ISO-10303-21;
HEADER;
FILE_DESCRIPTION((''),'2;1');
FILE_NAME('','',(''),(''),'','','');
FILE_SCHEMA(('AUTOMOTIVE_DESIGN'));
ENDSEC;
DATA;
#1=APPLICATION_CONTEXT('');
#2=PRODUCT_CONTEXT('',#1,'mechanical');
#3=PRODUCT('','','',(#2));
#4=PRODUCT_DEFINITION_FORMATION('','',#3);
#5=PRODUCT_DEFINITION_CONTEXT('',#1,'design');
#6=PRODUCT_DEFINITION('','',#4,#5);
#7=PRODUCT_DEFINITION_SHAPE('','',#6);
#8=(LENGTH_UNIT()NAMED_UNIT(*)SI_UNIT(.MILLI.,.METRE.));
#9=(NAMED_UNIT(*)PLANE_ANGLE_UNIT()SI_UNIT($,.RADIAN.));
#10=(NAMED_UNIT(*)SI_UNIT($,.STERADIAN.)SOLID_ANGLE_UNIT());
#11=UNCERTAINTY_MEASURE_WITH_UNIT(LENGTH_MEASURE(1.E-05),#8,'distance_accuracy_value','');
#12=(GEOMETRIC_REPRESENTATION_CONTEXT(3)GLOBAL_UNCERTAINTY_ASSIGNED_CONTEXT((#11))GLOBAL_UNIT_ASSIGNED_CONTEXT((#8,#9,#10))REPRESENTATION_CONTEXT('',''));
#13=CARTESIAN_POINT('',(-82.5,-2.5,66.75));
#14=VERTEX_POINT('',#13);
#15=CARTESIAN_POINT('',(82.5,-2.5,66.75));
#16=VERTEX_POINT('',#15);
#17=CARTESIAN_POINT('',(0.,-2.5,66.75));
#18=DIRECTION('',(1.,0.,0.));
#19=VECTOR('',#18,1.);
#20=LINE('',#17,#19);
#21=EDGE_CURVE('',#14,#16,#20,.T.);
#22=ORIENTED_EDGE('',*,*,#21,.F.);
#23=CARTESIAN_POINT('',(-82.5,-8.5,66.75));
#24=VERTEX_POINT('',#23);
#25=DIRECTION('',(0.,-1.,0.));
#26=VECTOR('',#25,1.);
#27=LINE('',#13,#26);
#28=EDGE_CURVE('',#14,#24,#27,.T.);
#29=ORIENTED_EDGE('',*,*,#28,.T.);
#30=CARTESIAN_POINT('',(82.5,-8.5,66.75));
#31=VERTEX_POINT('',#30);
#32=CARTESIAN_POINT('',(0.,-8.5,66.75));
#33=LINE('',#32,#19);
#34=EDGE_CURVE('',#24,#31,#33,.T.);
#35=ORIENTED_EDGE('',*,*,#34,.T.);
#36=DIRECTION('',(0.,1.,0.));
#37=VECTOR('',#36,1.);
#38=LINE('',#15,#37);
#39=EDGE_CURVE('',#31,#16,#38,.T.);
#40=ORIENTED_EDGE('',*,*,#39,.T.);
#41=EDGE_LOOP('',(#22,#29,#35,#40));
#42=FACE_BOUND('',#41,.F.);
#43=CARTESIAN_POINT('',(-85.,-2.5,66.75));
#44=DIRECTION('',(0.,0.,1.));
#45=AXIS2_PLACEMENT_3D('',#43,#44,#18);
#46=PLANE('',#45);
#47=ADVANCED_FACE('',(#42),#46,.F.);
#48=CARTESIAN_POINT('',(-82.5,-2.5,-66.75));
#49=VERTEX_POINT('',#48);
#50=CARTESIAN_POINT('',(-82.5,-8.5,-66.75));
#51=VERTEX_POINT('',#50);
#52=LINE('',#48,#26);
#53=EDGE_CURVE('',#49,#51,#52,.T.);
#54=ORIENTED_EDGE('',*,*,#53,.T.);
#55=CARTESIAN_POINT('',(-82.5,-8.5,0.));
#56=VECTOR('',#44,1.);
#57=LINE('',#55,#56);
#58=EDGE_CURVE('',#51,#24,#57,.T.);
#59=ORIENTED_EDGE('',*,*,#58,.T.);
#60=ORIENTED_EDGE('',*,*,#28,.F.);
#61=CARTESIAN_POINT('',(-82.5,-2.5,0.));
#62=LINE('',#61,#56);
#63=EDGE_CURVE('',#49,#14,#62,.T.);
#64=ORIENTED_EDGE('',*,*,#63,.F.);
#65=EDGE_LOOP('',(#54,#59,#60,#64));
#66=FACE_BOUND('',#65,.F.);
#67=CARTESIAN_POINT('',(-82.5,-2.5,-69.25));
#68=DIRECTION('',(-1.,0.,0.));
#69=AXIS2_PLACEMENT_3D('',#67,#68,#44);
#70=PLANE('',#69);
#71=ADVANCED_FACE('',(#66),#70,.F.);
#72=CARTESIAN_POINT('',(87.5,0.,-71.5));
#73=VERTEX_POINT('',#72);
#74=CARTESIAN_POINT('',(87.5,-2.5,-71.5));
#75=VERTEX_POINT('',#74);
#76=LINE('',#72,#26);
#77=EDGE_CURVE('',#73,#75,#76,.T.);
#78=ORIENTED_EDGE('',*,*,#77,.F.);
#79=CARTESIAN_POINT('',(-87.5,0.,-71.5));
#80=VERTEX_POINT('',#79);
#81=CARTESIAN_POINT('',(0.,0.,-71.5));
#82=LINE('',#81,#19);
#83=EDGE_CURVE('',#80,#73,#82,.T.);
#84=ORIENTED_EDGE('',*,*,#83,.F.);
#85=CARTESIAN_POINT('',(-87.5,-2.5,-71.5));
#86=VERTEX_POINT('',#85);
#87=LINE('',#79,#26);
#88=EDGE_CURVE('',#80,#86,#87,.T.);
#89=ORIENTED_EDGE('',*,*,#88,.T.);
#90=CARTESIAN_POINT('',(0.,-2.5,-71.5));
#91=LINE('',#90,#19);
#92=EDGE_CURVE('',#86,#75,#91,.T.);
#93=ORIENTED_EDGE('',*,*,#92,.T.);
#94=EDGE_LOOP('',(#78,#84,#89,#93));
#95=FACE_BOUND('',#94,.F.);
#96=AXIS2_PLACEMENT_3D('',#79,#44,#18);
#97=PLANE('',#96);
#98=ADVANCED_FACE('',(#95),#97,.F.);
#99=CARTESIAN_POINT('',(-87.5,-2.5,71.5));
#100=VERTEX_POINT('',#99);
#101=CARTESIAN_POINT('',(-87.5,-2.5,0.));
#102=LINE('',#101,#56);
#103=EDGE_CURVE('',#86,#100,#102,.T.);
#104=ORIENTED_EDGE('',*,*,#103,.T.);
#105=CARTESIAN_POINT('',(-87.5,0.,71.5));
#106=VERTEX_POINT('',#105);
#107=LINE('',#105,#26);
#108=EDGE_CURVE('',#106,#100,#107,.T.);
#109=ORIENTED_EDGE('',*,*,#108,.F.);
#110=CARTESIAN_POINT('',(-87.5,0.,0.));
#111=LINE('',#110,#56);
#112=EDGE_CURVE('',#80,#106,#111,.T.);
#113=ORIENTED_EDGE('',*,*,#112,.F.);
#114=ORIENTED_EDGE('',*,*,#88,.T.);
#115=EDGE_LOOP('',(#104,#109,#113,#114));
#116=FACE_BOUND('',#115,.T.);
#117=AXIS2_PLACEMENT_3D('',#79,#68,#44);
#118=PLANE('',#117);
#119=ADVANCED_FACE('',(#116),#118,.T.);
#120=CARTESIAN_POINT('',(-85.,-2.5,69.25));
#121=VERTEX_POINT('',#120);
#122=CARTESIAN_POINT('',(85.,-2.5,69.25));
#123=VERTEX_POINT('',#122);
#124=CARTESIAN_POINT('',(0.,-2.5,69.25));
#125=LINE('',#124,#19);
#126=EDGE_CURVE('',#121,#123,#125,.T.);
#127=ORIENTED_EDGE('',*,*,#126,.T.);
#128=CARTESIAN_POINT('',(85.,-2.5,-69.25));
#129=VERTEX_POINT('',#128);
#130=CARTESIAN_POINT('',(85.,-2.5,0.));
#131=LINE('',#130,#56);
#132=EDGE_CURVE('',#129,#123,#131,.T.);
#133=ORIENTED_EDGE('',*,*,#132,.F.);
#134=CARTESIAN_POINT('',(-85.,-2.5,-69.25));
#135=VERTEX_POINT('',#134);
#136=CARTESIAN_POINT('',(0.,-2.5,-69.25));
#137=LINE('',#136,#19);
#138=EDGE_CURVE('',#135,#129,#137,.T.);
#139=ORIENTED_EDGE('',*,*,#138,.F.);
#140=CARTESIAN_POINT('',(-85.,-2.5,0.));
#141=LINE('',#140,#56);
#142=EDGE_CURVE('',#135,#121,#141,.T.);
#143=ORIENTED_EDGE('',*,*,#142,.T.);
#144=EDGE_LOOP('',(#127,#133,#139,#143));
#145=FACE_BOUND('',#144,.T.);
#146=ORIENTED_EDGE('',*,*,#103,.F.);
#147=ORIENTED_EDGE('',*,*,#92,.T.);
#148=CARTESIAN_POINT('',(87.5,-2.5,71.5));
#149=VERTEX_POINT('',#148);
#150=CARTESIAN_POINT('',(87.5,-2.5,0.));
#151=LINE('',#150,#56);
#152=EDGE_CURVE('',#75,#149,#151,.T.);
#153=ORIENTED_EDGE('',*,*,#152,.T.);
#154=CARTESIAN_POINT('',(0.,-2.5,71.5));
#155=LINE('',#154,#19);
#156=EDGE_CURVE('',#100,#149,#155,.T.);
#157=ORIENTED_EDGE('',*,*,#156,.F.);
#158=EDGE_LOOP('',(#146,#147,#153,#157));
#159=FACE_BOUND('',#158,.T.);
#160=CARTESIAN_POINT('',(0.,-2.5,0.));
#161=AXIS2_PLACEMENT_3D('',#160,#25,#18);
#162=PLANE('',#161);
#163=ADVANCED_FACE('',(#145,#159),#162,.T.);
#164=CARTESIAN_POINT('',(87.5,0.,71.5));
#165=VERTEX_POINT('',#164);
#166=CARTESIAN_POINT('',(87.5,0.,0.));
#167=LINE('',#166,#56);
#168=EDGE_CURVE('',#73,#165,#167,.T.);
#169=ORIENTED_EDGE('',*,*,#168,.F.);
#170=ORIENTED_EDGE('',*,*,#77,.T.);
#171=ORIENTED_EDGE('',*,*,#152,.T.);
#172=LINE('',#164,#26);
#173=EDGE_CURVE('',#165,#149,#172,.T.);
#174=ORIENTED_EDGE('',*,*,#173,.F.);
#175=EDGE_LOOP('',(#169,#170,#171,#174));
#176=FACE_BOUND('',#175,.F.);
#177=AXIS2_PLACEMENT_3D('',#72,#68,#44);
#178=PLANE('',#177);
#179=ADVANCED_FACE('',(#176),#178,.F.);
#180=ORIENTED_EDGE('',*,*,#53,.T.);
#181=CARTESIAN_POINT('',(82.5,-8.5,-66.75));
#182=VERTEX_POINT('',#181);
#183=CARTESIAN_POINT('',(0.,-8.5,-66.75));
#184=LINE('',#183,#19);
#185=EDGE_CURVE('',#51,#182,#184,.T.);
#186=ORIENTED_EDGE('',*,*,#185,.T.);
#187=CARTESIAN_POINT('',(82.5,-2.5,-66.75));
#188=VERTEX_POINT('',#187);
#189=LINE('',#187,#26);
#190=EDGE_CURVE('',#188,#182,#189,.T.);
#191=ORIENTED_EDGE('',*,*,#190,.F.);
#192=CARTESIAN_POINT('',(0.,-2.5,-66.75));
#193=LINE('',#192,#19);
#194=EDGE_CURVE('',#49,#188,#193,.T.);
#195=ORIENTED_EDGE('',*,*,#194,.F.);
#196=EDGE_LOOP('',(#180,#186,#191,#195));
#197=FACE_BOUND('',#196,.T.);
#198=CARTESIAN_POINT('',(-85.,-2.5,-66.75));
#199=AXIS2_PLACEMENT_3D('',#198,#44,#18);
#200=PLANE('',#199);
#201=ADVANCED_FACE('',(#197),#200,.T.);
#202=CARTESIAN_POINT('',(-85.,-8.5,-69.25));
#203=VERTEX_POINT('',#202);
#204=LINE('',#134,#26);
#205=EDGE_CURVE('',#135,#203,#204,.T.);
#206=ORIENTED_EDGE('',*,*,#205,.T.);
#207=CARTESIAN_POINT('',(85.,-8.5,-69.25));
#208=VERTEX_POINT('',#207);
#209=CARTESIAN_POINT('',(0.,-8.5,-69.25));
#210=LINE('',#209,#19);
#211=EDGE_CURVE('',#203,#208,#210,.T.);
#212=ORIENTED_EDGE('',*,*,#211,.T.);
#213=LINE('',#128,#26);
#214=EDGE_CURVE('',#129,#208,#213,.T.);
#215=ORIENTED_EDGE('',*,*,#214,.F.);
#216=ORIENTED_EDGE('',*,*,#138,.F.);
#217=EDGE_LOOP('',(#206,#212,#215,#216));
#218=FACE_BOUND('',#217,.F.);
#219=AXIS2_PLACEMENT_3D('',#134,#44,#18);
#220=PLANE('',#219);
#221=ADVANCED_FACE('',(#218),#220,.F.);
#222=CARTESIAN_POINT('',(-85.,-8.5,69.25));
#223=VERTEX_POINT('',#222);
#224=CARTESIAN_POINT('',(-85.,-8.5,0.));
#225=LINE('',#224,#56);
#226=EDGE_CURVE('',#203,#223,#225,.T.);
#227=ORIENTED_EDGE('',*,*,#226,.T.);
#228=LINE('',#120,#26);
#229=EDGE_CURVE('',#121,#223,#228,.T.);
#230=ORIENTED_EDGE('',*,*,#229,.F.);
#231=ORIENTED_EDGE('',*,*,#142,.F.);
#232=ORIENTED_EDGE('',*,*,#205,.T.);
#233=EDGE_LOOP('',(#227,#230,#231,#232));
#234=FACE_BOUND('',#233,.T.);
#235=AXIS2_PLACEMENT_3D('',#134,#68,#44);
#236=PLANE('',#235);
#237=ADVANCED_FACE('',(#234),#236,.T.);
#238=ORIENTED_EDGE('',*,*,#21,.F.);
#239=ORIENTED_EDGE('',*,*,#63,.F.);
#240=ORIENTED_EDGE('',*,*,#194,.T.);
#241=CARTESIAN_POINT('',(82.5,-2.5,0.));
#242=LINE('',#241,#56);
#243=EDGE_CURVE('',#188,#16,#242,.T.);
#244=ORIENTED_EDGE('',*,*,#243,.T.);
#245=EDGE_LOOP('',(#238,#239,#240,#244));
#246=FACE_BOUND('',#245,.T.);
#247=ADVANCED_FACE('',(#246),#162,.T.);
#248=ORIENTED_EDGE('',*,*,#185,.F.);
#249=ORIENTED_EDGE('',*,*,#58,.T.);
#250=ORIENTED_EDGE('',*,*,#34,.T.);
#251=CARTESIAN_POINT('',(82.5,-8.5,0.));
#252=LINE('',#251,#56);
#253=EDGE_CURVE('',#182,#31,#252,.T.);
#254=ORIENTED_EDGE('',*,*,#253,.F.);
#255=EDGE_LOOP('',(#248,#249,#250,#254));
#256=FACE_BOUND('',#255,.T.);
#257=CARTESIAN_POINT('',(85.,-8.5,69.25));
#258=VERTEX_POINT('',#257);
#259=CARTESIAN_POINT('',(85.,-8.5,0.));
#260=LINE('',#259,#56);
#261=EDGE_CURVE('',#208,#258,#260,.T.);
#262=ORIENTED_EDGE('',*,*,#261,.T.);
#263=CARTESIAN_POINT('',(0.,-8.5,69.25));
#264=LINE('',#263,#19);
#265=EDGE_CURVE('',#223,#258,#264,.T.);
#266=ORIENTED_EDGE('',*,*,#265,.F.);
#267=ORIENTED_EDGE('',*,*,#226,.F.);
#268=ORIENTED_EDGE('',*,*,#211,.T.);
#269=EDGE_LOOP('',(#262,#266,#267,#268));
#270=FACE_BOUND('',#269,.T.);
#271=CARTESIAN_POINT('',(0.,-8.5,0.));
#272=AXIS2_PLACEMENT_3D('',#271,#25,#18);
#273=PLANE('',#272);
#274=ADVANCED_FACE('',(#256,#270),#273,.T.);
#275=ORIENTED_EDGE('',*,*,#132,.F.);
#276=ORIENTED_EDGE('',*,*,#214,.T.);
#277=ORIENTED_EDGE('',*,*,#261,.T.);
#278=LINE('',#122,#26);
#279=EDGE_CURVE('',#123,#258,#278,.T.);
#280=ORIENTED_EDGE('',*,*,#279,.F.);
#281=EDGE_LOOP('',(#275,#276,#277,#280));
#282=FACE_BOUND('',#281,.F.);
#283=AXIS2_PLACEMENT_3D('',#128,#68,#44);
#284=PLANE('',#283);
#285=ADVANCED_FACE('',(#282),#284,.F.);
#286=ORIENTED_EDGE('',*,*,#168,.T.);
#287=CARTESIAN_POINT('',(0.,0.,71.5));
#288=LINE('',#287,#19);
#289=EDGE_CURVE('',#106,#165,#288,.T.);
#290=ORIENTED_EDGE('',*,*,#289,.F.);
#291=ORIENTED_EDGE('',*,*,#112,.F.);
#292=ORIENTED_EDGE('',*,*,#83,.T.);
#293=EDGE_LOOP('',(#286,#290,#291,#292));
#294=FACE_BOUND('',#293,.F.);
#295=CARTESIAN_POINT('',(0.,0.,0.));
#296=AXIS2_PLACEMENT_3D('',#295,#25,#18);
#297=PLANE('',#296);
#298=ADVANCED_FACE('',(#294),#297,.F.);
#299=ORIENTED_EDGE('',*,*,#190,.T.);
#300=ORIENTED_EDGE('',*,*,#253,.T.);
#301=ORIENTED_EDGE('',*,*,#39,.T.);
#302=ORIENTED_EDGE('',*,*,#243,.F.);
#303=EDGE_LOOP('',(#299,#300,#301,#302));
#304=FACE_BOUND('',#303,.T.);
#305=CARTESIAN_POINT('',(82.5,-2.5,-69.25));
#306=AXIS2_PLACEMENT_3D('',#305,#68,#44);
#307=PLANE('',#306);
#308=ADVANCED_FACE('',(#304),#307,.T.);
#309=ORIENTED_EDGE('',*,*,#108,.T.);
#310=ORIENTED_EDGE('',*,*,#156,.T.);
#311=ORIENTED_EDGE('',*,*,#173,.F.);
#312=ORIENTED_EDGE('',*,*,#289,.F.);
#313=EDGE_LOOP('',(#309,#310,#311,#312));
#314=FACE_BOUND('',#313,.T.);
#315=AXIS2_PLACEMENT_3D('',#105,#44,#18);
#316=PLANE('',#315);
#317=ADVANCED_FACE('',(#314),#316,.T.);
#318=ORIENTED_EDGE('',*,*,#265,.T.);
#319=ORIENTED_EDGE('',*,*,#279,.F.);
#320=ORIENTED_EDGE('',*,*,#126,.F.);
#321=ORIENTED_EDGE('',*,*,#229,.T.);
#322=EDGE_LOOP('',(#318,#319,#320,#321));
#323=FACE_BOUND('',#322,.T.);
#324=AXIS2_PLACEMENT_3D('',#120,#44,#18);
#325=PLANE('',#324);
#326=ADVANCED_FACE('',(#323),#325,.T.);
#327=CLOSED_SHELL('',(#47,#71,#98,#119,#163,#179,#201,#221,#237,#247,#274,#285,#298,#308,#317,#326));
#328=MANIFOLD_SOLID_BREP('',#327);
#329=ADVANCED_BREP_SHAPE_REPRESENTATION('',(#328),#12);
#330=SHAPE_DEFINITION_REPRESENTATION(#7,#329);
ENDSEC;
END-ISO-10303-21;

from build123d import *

# Parameters (mm, degrees)
F0_W        = 175
F0_H        = 143
F1_DEPTH    = 2.5
F2_W        = 170
F2_H        = 138.5
F3_DEPTH    = 6
F4_T        = 2.5
F4_T3_DEPTH = 175
F4_T5_DEPTH = 143.5


# Not quite as in the source:
# - a shell that OpenCascade refuses in one call is made with other operations: the cavity is built on its own and cut out


with BuildPart() as f1:
    # F0 (on Front) → F1 (new body)
    with BuildSketch(Plane.XZ):
        Rectangle(F0_W, F0_H)
    extrude(amount=F1_DEPTH)

    # F2 (on face) → F3 (join)
    with BuildSketch(Plane.XZ.offset(2.5)):
        Rectangle(F2_W, F2_H)
    extrude(amount=F3_DEPTH)

    # F4: shell of thickness 2.5, made by hand


with BuildPart() as f4_core1:
    # F4_t2: copy of F1
    add(f1.part)

    # the walls: a layer under each face that stays
    f4_faces = [f4_core1.faces().sort_by_distance(p)[0] for p in [
        (0, -1.25, -71.5),
        (-87.5, -1.25, 0),
        (87.5, -1.25, 0),
        (0, 0, 0),
        (60.15625, -2.5, -69.7345679012),
        (0, -1.25, 71.5),
        (0, -5.5, -69.25),
        (85, -5.5, 0),
        (0, -5.5, 69.25),
        (-85, -5.5, 0),
    ]]
    thicken(f4_faces, amount=-F4_T, mode=Mode.SUBTRACT)

    # F4_s4 → F4_t3 (cut)
    with BuildSketch(Plane.YZ.offset(-87.5)):
        Polygon((-2.525, -69.275), (0, -69.25), (0, -66.75), (-2.5, -66.75), align=None)
        Polygon((-2.525, 69.275), (0, 69.25), (0, 66.75), (-2.5, 66.75), align=None)
    extrude(amount=F4_T3_DEPTH, mode=Mode.SUBTRACT)

    # F4_s6 → F4_t5 (cut)
    with BuildSketch(Plane.XY.offset(-71.75)):
        Polygon((85.025, -2.525), (85, 0), (82.5, 0), (82.5, -2.5), align=None)
        Polygon((-85.025, -2.525), (-85, 0), (-82.5, 0), (-82.5, -2.5), align=None)
    extrude(amount=F4_T5_DEPTH, mode=Mode.SUBTRACT)


with BuildPart() as f1_1:
    add(f1.part)

    # what is left inside the walls is the cavity
    f4_cavity = [f4_core1.part.solids().sort_by_distance(p)[0] for p in [
        (0, -2.525, -22.25),
    ]]
    add(f4_cavity, mode=Mode.SUBTRACT)


solid = f1_1.part
